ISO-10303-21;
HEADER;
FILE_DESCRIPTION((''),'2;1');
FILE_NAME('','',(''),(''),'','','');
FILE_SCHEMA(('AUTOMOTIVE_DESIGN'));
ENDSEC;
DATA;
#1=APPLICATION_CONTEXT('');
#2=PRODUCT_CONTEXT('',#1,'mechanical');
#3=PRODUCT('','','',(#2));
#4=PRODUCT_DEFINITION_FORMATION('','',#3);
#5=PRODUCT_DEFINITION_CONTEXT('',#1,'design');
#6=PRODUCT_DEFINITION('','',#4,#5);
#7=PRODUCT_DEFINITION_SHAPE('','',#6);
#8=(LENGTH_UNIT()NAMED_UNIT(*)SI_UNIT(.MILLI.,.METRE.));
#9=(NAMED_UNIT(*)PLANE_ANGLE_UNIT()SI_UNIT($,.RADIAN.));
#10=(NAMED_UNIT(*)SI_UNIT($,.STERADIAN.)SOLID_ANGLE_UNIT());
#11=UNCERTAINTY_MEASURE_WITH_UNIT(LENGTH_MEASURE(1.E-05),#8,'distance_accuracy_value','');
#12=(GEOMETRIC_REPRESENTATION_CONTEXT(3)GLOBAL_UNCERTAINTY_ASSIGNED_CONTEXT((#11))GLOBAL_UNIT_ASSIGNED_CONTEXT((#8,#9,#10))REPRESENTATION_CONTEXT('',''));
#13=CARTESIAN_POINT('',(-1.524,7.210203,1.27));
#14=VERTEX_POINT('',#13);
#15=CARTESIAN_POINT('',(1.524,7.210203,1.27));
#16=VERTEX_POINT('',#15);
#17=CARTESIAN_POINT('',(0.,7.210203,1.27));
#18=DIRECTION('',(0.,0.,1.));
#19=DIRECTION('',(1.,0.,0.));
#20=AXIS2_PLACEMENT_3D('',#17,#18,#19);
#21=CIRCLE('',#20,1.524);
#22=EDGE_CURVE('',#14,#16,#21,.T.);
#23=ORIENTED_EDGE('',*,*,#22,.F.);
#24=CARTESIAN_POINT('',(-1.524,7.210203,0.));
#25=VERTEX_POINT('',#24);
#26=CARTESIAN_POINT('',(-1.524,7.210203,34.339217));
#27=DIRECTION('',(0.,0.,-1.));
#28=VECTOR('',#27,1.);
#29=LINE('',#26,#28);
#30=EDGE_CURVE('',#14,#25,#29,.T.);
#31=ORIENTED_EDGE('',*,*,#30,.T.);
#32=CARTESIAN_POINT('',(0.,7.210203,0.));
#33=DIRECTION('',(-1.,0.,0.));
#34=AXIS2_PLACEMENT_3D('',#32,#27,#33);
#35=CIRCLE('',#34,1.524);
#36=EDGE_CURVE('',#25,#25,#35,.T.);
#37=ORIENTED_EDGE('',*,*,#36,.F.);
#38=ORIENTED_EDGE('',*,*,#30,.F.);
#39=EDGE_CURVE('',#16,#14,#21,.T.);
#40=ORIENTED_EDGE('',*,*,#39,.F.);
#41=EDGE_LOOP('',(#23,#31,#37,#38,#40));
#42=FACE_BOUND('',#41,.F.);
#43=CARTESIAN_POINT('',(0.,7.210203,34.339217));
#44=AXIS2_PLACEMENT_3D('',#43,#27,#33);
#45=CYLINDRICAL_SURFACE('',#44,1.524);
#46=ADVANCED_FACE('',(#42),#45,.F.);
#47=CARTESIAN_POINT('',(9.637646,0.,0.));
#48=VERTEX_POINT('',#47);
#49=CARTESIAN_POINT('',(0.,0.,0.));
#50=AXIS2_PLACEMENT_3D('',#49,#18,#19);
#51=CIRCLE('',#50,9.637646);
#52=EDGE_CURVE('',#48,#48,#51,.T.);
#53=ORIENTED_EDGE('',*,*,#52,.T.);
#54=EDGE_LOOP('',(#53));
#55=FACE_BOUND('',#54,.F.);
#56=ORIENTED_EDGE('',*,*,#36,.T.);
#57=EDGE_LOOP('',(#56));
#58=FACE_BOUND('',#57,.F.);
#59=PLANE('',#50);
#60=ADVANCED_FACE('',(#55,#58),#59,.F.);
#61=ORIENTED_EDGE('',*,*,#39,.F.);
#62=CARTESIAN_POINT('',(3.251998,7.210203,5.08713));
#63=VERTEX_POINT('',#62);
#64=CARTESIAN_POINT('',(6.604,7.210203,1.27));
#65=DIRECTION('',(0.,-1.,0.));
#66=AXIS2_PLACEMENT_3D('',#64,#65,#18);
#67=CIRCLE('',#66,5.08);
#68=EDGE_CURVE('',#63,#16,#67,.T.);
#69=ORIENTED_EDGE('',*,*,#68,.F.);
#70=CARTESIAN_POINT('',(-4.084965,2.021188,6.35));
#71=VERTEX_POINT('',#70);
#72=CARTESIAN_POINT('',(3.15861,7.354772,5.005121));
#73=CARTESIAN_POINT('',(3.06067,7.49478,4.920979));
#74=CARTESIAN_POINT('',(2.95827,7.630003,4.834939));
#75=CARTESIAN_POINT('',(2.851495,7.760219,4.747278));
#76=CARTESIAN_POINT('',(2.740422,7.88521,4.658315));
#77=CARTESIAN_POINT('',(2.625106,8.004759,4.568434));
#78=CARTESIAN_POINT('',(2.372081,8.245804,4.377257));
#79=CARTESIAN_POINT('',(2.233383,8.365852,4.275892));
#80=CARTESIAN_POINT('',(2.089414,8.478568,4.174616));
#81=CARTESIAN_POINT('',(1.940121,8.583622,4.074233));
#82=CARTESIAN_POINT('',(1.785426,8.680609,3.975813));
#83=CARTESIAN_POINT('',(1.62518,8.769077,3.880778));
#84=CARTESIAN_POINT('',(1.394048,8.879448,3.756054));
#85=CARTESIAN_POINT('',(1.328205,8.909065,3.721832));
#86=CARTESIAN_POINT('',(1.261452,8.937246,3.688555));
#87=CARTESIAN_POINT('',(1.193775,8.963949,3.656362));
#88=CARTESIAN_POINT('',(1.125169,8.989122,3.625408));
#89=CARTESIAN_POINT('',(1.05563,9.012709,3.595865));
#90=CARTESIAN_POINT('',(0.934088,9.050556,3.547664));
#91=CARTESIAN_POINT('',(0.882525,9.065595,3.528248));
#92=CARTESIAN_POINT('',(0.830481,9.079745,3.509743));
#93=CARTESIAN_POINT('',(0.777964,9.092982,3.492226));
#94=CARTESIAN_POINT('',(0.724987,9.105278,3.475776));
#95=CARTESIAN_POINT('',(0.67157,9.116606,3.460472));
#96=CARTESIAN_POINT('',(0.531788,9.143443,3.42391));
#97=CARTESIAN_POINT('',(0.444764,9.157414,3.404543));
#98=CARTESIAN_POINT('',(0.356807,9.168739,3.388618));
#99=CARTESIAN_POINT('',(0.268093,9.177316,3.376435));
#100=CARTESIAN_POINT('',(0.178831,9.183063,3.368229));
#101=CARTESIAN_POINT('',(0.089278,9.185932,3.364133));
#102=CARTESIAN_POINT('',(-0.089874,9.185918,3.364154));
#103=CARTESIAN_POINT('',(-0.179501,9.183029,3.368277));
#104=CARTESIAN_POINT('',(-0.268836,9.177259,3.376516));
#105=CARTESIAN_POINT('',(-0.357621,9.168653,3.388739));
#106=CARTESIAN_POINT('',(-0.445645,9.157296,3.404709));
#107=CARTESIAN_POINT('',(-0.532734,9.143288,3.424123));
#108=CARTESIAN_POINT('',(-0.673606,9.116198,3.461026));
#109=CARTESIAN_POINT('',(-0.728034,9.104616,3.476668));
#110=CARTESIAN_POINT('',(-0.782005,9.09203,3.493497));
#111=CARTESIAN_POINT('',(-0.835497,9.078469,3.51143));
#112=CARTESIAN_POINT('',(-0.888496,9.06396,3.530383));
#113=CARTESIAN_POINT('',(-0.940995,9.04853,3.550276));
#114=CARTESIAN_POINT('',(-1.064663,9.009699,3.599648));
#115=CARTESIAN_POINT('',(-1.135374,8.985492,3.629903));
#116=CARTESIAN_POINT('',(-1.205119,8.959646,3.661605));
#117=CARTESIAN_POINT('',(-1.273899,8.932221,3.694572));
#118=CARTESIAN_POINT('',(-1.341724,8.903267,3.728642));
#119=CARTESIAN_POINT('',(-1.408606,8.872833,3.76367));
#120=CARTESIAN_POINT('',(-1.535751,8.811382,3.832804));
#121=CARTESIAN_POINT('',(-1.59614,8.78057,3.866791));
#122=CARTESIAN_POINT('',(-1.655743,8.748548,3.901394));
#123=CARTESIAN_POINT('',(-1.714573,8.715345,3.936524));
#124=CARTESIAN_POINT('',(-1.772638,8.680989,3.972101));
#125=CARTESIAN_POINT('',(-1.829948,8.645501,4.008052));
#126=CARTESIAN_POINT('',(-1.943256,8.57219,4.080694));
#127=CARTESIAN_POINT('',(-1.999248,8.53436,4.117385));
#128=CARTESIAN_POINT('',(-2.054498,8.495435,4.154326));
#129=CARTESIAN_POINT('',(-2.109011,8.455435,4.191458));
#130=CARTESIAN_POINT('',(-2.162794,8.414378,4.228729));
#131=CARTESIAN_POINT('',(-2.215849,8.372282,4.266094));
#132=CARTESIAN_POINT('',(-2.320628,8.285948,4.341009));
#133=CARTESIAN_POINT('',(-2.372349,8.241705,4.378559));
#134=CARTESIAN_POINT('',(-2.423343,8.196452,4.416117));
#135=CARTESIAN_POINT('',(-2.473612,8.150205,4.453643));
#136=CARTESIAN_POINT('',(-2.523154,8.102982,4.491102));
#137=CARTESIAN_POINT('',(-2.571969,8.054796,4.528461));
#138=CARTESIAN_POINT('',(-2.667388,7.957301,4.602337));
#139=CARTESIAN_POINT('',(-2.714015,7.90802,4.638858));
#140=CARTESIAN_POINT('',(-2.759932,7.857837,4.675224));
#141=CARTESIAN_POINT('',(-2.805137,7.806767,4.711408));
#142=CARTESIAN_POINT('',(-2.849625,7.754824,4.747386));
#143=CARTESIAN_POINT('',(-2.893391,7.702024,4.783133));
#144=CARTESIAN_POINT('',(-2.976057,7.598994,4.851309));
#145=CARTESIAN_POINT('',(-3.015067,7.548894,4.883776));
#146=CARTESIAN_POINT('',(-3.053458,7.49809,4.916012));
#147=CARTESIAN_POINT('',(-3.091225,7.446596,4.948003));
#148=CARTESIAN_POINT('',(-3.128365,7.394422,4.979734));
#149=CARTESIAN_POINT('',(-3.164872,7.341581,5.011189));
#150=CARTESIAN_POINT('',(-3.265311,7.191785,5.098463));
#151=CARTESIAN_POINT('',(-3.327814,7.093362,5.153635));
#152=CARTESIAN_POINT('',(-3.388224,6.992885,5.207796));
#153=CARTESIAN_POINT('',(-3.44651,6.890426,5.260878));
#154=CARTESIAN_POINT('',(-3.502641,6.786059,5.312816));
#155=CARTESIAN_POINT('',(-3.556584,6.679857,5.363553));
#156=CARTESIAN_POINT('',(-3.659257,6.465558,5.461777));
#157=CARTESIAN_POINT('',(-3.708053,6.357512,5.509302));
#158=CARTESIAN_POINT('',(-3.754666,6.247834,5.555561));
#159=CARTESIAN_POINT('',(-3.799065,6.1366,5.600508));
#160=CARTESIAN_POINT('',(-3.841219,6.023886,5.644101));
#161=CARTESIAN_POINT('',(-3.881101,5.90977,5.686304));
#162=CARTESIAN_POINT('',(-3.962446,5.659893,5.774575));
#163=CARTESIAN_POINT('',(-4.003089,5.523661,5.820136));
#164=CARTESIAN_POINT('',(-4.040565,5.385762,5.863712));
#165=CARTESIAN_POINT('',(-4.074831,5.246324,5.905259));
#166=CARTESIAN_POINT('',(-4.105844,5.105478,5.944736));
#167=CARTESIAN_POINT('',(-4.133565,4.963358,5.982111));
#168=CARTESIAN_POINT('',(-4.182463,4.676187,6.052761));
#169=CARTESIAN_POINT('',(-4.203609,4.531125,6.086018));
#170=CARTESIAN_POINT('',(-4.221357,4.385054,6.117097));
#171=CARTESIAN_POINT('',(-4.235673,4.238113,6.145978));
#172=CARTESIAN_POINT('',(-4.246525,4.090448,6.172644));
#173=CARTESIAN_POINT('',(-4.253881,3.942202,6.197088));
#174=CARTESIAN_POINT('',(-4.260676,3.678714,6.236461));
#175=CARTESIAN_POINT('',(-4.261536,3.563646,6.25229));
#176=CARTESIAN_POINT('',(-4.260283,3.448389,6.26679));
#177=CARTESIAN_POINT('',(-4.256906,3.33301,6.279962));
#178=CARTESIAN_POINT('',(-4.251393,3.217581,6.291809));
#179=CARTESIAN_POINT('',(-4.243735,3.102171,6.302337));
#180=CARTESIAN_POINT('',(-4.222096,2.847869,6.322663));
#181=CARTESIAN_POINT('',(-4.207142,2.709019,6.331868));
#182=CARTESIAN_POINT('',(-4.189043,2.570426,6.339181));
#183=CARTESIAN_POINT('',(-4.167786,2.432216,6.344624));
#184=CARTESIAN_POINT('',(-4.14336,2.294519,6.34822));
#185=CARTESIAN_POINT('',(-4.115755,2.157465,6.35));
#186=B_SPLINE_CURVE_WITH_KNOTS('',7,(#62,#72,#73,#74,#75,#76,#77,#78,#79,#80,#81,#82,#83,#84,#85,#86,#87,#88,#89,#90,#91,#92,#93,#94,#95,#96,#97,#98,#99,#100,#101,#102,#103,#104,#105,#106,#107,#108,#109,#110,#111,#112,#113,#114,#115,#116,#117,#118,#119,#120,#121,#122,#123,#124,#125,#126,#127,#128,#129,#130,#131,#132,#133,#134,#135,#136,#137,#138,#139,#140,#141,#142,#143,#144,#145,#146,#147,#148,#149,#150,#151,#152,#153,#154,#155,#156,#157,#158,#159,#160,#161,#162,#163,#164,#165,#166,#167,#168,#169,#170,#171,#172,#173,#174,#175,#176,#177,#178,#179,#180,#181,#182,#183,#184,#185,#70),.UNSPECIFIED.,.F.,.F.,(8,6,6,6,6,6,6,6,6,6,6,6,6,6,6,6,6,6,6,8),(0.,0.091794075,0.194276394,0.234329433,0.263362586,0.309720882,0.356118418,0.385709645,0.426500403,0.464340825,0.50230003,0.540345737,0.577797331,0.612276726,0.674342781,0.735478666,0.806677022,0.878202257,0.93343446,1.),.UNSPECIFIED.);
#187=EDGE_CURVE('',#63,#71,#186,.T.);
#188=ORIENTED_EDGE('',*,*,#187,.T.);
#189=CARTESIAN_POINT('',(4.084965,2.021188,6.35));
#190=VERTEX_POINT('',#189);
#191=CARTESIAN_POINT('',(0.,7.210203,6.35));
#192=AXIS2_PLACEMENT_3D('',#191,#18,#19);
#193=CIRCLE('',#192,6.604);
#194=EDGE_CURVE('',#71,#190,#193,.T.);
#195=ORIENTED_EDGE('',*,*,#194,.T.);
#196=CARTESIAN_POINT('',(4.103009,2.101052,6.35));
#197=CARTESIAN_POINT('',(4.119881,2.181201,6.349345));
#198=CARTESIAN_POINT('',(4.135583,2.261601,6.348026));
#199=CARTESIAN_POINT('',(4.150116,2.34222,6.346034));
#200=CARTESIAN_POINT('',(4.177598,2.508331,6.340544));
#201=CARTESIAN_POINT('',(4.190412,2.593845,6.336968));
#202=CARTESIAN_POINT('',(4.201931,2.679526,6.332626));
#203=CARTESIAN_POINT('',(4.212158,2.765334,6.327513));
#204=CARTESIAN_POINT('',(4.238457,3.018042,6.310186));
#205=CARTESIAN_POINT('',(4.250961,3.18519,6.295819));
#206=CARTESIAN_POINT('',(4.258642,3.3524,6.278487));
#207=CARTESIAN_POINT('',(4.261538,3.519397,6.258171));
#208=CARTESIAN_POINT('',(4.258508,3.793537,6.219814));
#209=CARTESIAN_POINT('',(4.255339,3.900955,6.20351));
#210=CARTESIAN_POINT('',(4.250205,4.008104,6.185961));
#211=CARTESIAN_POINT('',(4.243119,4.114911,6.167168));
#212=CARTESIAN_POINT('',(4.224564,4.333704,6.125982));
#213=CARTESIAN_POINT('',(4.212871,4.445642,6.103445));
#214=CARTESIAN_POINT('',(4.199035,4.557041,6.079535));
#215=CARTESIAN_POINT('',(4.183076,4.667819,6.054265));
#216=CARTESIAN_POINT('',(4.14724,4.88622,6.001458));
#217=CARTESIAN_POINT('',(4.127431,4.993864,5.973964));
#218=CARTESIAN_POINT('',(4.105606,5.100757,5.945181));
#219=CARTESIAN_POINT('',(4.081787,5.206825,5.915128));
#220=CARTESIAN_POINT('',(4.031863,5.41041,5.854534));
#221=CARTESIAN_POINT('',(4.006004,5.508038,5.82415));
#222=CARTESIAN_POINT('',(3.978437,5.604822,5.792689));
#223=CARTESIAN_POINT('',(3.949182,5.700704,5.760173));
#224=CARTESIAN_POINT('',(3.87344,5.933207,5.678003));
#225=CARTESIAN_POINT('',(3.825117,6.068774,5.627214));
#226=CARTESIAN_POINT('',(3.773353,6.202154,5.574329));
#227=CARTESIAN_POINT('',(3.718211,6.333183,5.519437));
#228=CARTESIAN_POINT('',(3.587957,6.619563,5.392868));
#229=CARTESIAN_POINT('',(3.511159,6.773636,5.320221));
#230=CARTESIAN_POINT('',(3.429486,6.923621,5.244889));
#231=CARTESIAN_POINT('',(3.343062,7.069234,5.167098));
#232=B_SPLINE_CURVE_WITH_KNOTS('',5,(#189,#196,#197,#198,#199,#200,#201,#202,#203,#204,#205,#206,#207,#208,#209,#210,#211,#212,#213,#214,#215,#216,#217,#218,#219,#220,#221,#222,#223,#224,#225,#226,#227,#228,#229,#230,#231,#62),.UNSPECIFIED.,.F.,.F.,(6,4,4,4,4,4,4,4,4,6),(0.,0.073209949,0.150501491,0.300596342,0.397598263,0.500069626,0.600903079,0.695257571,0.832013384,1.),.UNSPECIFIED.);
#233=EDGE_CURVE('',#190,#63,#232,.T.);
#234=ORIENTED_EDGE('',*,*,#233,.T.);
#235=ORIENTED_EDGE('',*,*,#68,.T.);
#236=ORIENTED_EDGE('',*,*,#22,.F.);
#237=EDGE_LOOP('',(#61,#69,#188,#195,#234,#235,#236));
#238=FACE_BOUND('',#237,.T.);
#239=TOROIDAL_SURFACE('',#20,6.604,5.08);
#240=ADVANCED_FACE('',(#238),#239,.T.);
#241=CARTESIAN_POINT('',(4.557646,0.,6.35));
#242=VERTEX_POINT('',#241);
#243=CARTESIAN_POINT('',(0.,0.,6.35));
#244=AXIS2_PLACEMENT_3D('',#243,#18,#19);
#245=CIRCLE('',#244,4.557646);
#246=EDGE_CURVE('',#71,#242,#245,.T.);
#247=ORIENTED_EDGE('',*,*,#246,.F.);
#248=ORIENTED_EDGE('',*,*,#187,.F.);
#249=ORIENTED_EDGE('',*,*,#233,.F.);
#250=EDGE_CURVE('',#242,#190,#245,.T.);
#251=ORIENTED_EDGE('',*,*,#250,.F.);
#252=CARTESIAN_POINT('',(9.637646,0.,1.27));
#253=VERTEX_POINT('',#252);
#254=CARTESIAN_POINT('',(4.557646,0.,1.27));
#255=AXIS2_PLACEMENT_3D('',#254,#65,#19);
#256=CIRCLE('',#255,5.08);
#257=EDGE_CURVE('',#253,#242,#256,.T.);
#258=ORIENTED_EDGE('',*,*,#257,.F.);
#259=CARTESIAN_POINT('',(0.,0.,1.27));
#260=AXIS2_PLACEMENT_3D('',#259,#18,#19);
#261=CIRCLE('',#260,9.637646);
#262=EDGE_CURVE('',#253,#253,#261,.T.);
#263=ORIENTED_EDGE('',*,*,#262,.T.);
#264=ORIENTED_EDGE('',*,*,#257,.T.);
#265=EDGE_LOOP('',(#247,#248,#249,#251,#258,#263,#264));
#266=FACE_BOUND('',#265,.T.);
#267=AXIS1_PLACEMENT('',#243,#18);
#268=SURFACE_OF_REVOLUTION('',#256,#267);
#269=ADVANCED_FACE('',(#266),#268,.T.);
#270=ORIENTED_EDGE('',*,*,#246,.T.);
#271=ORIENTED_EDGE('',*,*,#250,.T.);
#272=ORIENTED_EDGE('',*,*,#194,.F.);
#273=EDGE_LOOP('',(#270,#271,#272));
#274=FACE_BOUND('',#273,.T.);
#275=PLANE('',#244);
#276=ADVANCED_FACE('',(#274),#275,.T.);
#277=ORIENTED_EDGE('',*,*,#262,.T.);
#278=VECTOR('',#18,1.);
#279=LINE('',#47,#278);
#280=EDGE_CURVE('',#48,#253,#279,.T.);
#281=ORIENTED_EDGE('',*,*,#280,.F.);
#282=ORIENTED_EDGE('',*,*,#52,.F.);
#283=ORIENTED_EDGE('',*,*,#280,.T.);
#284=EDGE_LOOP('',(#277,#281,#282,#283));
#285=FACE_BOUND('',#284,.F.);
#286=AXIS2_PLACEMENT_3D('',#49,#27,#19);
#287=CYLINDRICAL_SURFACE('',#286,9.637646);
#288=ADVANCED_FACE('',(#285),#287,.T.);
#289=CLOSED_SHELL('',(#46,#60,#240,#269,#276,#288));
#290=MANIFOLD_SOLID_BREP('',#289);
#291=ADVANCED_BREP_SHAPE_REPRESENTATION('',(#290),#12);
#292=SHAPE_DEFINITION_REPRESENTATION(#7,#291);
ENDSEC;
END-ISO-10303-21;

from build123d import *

# Parameters (mm, degrees)
F0_R     = 9.6376461191
F1_DEPTH = 6.35
F3_D     = 3.048


# Not quite as in the source:
# - a fillet or chamfer that OpenCascade refuses, or shapes differently, is made with other operations: its cross-section is extruded or revolved along the edge and cut away or added
# - a length typed as a fraction of an inch, garbled in the dataset ("3 / 203.2 mm" for 3/8 in), is restored


with BuildPart() as f1:
    # F0 (on Top) → F1 (new body)
    with BuildSketch(Plane.XY):
        Circle(F0_R)
    extrude(amount=F1_DEPTH)

    # F3 (through all)
    with Locations(Plane.XY.offset(6.35)):
        with Locations((0, 7.2102034464)):
            Hole(F3_D / 2)

    # F4: fillet of radius 5.08 on 2 edges, made by hand

    # F4_s1 → F4_t2 (revolve, cut)
    with BuildSketch(Plane.XZ):
        with BuildLine():
            ThreePointArc((9.6376461191, 1.27), (8.1497485675, 4.8621024484), (4.5576461191, 6.35))
            Line((4.5576461191, 6.35), (9.6376461191, 6.35))
            Line((9.6376461191, 6.35), (9.6376461191, 1.27))
        make_face()
    revolve(axis=Axis((0, 0, 6.35), (0, 0, 1)), mode=Mode.SUBTRACT)

    # F4_s3 → F4_t4 (revolve, cut)
    with BuildSketch(Plane.XZ.offset(-7.2102034464)):
        with BuildLine():
            ThreePointArc((6.604, 6.35), (3.0118975516, 4.8621024484), (1.524, 1.27))
            Line((1.524, 1.27), (1.524, 6.35))
            Line((1.524, 6.35), (6.604, 6.35))
        make_face()
    revolve(axis=Axis((0, 7.2102034464, 6.35), (0, 0, 1)), mode=Mode.SUBTRACT)


solid = f1.part
